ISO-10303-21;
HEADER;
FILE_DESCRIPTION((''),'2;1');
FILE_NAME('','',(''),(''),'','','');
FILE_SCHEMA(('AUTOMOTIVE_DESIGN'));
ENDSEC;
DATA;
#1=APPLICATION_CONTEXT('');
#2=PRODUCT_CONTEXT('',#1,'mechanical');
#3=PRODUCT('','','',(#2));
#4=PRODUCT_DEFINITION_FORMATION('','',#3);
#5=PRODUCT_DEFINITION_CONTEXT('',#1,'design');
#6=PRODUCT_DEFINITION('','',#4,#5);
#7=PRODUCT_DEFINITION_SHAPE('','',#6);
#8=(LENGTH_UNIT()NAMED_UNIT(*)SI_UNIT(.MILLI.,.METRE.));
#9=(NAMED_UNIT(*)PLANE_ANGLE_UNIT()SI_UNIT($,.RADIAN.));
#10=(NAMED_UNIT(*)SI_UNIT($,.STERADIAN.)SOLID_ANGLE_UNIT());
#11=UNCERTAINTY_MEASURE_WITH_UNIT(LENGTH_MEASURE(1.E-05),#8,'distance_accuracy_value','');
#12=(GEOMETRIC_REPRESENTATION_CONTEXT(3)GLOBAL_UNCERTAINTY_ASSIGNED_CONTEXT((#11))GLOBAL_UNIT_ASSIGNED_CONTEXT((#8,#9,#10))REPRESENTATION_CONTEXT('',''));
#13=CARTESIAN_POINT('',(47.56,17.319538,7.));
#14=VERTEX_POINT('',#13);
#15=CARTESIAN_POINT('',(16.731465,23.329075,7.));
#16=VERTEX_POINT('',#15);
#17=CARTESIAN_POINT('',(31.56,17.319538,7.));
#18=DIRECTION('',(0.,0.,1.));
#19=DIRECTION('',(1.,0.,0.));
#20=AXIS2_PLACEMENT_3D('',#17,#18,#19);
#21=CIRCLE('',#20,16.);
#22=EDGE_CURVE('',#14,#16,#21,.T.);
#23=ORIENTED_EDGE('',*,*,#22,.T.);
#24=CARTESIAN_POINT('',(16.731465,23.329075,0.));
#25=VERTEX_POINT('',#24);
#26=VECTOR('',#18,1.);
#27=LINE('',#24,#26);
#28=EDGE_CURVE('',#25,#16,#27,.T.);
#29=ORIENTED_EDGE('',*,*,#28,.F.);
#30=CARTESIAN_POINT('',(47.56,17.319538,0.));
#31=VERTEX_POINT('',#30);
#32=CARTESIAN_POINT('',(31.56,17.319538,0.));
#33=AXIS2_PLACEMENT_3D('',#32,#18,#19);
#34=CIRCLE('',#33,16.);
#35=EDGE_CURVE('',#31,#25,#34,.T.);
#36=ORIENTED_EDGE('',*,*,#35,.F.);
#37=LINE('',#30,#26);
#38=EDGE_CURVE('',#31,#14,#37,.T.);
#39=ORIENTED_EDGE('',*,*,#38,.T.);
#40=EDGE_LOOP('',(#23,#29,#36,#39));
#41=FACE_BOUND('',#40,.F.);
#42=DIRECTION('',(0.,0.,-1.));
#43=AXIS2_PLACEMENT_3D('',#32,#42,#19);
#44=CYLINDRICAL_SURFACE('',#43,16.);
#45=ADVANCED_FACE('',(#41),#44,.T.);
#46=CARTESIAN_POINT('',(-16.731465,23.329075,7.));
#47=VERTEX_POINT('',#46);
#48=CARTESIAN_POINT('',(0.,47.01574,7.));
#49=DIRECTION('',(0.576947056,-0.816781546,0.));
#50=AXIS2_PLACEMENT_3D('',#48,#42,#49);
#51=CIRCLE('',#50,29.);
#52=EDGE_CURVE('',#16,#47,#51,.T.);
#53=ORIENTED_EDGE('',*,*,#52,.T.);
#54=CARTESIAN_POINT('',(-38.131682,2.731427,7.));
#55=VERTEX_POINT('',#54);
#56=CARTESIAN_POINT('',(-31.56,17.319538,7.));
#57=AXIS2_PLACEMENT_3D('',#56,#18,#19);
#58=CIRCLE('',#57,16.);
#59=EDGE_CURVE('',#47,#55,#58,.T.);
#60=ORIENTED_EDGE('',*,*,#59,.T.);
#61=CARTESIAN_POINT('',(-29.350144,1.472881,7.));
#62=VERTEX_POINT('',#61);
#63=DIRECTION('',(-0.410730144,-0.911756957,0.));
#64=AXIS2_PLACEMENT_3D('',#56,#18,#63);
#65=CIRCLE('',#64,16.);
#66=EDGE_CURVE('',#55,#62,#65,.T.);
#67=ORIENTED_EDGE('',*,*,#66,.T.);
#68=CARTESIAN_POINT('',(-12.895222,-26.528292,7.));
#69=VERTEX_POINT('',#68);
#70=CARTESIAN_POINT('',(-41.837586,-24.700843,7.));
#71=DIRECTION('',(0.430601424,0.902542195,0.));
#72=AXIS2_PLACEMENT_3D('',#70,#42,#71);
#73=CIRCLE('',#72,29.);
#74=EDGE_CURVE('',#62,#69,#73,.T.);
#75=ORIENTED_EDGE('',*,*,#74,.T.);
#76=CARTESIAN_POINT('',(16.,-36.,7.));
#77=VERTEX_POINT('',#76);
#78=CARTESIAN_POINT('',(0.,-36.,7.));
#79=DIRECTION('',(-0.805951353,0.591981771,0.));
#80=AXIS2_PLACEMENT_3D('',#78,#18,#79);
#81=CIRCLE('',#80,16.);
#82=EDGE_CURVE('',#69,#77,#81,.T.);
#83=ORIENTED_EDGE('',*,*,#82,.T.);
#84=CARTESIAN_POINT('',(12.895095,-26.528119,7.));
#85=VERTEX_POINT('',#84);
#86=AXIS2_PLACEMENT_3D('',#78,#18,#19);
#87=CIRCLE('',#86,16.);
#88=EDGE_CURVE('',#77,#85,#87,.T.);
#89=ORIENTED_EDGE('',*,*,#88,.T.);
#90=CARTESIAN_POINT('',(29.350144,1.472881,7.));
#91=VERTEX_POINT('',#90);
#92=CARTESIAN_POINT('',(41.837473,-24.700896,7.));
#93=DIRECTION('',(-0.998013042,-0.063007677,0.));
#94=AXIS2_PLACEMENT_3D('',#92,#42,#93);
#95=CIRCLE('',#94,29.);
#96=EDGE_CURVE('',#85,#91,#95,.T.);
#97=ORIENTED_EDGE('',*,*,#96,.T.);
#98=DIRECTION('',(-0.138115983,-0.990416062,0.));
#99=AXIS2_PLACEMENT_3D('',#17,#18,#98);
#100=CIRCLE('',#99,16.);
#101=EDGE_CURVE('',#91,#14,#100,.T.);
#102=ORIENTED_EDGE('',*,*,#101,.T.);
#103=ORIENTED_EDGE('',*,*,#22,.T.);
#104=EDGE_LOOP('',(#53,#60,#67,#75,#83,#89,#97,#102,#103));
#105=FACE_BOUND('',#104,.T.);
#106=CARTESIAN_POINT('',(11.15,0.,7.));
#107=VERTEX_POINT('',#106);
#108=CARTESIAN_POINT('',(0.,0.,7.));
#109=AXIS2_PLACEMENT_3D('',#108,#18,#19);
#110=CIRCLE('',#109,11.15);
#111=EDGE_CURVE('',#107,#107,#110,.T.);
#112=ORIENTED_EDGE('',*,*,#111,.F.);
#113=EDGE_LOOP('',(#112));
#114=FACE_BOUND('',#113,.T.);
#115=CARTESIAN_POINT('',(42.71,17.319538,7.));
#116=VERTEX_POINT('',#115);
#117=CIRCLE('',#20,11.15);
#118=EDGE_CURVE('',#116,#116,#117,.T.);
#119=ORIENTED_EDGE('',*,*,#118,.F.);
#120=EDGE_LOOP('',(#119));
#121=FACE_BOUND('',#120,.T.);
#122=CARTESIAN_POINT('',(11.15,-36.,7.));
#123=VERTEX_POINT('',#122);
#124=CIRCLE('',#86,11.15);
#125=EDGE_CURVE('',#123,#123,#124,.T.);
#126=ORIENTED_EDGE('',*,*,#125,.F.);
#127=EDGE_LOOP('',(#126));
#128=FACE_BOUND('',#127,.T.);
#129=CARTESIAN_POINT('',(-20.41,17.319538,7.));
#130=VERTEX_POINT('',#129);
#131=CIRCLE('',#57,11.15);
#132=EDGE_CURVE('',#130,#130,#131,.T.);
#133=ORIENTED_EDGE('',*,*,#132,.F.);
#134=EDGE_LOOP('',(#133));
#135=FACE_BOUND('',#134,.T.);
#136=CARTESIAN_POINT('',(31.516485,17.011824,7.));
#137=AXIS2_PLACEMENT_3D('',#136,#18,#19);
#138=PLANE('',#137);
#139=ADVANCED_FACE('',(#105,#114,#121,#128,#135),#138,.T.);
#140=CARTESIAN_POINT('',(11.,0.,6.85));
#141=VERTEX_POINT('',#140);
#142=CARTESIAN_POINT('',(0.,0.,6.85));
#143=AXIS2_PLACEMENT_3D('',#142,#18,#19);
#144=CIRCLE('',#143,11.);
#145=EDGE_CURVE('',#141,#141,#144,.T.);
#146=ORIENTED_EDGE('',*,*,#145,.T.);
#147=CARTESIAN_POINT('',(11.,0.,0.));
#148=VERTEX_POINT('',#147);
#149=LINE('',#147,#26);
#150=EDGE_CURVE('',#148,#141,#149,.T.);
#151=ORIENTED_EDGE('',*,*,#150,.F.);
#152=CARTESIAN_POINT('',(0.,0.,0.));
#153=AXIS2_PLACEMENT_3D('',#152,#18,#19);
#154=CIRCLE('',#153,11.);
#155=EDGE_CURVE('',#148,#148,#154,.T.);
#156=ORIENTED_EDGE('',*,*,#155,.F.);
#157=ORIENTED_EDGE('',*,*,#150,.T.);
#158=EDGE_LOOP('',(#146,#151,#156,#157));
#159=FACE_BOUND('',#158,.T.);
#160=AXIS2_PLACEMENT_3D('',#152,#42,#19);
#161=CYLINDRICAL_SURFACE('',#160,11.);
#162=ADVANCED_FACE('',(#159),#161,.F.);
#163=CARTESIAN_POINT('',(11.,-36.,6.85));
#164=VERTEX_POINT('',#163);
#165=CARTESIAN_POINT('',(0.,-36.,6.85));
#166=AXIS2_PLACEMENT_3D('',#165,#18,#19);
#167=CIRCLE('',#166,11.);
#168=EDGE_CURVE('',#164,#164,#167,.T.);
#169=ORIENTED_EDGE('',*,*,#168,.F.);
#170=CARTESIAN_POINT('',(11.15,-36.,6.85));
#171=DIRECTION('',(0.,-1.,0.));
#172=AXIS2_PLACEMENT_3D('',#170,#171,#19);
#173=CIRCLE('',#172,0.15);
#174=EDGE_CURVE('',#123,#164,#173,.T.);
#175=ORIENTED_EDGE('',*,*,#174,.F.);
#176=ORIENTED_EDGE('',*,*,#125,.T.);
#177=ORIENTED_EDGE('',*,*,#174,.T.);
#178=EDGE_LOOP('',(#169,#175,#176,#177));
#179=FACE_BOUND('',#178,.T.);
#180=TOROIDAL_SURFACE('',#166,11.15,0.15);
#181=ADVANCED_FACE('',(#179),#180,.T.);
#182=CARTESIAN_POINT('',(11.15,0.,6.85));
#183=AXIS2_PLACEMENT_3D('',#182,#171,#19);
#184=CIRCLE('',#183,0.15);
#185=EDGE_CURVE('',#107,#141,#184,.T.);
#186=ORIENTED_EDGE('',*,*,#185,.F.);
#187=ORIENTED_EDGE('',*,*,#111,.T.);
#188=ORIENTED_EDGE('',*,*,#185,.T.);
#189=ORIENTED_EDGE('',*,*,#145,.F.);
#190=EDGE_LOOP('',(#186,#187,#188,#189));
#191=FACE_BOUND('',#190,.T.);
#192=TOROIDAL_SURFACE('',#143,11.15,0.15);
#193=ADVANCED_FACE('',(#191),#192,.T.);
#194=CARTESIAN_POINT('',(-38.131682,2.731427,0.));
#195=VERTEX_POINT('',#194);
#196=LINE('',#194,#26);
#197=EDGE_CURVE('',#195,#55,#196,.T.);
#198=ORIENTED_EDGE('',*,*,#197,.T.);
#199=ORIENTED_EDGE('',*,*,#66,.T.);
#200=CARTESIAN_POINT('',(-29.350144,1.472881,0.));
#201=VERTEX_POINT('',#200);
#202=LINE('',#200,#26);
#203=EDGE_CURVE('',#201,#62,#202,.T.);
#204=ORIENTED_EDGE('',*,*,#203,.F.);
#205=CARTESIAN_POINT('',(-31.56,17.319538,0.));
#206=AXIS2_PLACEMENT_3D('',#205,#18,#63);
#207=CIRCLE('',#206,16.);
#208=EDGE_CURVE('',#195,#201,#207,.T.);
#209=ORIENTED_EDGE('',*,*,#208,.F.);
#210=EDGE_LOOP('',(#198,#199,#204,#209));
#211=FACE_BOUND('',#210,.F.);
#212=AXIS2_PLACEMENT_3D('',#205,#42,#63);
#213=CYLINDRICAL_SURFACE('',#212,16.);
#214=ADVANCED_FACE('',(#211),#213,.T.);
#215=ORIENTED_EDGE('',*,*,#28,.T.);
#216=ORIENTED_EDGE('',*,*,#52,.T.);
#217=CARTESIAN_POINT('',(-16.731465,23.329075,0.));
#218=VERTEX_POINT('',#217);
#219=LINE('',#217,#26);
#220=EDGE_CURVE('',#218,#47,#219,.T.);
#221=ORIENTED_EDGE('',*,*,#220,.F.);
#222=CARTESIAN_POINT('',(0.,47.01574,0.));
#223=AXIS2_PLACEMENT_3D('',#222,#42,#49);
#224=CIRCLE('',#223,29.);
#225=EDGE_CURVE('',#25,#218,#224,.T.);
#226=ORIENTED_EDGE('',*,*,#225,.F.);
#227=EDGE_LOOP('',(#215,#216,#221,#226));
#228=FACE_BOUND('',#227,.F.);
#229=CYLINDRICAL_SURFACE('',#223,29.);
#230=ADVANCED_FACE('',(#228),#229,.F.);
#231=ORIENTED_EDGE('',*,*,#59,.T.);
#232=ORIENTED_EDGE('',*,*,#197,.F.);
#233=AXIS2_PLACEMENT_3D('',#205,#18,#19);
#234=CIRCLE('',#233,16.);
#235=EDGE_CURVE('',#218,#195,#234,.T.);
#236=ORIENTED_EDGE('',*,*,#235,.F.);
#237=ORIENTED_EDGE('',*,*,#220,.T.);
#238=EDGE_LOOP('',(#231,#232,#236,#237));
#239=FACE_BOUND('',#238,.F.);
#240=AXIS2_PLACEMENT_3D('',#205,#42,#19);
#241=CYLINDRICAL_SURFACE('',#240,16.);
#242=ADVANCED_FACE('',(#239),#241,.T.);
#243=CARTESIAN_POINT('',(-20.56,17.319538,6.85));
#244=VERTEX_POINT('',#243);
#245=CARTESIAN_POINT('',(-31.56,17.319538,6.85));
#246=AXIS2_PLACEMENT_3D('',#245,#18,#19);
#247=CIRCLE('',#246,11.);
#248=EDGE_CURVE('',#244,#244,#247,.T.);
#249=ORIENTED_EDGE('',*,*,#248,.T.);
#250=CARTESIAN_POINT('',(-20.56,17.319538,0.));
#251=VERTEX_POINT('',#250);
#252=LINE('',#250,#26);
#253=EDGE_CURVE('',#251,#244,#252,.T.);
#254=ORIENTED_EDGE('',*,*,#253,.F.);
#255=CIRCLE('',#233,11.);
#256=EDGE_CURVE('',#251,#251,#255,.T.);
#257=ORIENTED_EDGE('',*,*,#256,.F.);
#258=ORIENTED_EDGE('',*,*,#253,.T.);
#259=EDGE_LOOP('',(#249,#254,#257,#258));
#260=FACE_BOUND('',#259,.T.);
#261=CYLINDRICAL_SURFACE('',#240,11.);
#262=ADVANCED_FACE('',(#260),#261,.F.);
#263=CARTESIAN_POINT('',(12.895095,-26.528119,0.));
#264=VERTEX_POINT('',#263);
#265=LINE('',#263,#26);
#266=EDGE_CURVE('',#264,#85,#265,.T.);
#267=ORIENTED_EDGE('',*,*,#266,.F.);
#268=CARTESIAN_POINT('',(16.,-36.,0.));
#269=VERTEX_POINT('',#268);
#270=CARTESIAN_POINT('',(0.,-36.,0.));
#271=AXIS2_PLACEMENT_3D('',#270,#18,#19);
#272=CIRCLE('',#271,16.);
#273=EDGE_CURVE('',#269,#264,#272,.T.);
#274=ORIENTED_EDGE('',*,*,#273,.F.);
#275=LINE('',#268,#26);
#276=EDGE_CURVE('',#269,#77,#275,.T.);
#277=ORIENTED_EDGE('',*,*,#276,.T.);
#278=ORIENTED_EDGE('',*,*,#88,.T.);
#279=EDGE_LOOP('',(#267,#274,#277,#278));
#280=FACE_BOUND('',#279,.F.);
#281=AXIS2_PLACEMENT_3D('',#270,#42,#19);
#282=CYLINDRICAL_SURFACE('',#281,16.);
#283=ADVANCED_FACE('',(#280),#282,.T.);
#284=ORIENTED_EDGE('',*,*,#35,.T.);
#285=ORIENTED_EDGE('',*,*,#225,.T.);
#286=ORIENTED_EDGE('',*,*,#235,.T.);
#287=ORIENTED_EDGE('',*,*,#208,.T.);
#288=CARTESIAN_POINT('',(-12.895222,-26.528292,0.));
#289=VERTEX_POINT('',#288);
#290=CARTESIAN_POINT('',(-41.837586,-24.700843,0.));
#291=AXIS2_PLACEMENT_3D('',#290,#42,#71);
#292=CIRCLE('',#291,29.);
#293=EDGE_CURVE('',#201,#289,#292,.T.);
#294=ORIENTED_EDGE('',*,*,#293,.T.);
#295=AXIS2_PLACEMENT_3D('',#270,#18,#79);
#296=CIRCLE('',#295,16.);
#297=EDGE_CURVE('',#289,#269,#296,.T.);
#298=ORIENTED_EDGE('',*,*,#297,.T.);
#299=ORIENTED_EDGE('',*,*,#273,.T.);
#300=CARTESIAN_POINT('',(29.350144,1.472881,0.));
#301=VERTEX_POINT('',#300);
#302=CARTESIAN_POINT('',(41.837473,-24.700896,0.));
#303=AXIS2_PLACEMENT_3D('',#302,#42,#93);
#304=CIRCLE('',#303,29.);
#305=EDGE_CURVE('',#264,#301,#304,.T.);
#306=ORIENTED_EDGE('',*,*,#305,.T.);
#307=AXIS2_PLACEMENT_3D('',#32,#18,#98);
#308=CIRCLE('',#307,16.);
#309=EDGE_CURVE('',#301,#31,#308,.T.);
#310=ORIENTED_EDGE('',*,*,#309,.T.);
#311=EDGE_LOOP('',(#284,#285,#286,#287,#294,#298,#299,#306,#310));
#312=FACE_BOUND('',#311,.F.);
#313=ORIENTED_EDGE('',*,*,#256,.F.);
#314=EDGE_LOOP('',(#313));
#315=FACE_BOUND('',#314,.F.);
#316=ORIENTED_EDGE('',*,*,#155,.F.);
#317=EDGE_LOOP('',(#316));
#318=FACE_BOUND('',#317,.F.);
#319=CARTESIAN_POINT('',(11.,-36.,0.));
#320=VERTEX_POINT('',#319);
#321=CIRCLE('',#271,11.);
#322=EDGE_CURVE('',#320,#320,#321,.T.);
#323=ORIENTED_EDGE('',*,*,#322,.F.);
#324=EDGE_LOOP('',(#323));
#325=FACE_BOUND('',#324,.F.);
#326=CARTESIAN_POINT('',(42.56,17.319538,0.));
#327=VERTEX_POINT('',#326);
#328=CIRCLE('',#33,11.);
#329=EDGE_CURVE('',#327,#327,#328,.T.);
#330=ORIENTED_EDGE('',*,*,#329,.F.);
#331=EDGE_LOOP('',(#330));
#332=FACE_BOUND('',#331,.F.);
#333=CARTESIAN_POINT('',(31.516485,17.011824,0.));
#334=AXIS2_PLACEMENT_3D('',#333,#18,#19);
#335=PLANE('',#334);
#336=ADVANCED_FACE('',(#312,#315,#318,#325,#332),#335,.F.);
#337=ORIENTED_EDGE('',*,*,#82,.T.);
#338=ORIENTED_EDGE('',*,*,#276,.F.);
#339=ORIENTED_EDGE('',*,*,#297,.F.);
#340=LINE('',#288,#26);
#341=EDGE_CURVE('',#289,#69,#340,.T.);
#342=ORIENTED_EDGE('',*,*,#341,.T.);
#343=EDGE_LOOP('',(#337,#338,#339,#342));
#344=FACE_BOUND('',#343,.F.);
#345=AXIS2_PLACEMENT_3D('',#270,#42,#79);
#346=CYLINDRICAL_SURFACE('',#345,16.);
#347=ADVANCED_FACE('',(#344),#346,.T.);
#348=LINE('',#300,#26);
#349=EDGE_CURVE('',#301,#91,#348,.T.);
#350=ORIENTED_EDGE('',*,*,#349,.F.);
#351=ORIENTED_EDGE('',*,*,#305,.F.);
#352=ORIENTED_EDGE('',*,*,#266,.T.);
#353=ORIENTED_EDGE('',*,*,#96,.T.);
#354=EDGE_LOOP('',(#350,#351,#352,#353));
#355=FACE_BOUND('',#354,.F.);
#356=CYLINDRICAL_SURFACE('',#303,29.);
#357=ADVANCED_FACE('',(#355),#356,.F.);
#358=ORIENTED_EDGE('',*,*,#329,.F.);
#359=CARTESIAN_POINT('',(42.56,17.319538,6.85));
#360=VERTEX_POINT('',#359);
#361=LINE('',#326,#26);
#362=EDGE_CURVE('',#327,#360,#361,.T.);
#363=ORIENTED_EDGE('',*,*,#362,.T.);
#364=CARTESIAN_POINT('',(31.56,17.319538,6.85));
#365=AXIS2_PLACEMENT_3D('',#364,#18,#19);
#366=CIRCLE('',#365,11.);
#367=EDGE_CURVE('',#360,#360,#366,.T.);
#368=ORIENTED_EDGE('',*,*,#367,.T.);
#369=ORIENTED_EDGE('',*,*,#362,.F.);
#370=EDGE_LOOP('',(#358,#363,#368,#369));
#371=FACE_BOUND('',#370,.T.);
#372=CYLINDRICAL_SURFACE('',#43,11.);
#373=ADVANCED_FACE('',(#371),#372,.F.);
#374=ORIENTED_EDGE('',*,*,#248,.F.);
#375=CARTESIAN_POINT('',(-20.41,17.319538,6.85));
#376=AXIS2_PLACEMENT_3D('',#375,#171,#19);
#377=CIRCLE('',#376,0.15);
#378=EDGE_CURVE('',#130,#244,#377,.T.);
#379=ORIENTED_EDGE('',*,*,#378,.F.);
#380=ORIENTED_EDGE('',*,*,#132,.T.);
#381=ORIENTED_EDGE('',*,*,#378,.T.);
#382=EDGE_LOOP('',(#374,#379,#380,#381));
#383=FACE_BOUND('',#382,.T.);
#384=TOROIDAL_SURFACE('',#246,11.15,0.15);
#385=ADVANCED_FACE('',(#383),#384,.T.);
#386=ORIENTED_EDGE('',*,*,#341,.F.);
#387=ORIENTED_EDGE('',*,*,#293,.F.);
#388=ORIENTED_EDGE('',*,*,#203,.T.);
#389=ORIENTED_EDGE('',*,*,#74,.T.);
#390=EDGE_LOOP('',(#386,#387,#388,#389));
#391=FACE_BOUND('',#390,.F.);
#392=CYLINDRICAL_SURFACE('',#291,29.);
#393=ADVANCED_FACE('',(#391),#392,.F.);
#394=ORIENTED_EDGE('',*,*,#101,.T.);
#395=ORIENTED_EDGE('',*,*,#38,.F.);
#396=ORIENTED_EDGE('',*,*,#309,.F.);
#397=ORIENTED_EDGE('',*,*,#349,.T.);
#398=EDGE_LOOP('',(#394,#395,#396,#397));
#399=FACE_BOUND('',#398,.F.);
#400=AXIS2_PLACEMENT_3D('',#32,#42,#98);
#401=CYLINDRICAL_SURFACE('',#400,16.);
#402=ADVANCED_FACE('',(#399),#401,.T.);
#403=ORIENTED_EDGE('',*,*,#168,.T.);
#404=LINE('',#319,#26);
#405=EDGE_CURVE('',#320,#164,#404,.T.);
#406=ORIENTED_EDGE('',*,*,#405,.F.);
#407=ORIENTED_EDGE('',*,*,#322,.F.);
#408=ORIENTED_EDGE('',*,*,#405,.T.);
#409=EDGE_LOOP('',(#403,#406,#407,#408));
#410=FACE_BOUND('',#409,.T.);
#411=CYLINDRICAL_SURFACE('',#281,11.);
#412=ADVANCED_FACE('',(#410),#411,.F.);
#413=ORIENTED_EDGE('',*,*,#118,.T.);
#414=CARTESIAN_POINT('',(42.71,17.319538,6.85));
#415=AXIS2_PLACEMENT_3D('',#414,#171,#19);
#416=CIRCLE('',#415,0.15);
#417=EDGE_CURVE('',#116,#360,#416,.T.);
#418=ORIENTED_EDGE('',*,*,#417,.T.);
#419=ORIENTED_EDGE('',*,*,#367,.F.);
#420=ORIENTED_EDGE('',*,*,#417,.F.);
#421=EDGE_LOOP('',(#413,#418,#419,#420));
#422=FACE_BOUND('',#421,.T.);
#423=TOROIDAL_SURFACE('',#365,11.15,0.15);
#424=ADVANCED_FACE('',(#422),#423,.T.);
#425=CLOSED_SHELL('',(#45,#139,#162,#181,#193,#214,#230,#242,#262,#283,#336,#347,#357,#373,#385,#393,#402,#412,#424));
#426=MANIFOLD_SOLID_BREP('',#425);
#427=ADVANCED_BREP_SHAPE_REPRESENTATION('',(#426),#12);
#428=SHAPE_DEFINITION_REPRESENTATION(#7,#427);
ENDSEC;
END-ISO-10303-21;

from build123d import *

# Parameters (mm, degrees)
F0_R     = 11
F1_DEPTH = 7
F2_DEPTH = 7
F3_R     = 0.15
F4_R     = 0.15
F5_R     = 0.15


# Not quite as in the source:
# - a feature names something its author has since deleted; it is built from what else it names


with BuildPart() as f1:
    # F0 (on Top) → F1 (new body)
    with BuildSketch(Plane.XY):
        with BuildLine():
            ThreePointArc((29.3501442774, 1.4728811124), (17.7035935394, 9.3195381001), (16.7314646223, 23.3290753994))
            ThreePointArc((16.7314646223, 23.3290753994), (0, 18.0157402468), (-16.7314646223, 23.3290753994))
            ThreePointArc((-16.7314646223, 23.3290753994), (-15.8555966996, 20.3808641164), (-15.56, 17.3195381001))
            ThreePointArc((-15.56, 17.3195381001), (-19.4902507988, 6.8161503505), (-29.3501442774, 1.4728811124))
            ThreePointArc((-29.3501442774, 1.4728811124), (-16.8351135056, -10.0081099666), (-12.8952216464, -26.5282916699))
            ThreePointArc((-12.8952216464, -26.5282916699), (-0.0001071921, -20.0000000004), (12.8950947338, -26.5281188876))
            ThreePointArc((12.8950947338, -26.5281188876), (16.8350899961, -10.0080120701), (29.3501442774, 1.4728811124))
        make_face()
        Circle(F0_R, mode=Mode.SUBTRACT)
    extrude(amount=F1_DEPTH)

    # F0 (on Top) → F2 (join)
    with BuildSketch(Plane.XY):
        with BuildLine():
            ThreePointArc((29.3501442774, 1.4728811124), (42.0633877496, 5.2497888988), (47.56, 17.3195381001))
            ThreePointArc((47.56, 17.3195381001), (34.6213260163, 33.0239414005), (16.7314646223, 23.3290753994))
            ThreePointArc((16.7314646223, 23.3290753994), (17.7035935394, 9.3195381001), (29.3501442774, 1.4728811124))
        make_face()
        with Locations((31.56, 17.3195381001)):
            Circle(F0_R, mode=Mode.SUBTRACT)
        with BuildLine():
            ThreePointArc((-15.56, 17.3195381001), (-15.8555966996, 20.3808641164), (-16.7314646223, 23.3290753994))
            ThreePointArc((-16.7314646223, 23.3290753994), (-42.6554805123, 28.8473441446), (-38.1316823001, 2.7314267848))
            ThreePointArc((-38.1316823001, 2.7314267848), (-33.8298826127, 1.4813679746), (-29.3501442774, 1.4728811124))
            ThreePointArc((-29.3501442774, 1.4728811124), (-19.4902507988, 6.8161503505), (-15.56, 17.3195381001))
        make_face()
        with Locations((-31.56, 17.3195381001)):
            Circle(F0_R, mode=Mode.SUBTRACT)
        with BuildLine():
            ThreePointArc((16, -36), (15.2039717794, -31.0161017135), (12.8950947338, -26.5281188876))
            ThreePointArc((12.8950947338, -26.5281188876), (-0.0001071921, -20.0000000004), (-12.8952216464, -26.5282916699))
            ThreePointArc((-12.8952216464, -26.5282916699), (-4.9837964273, -51.2040051687), (16, -36))
        make_face()
        with Locations((0, -36)):
            Circle(F0_R, mode=Mode.SUBTRACT)
    extrude(amount=F2_DEPTH)

    # F3
    f3_edges = [f1.edges().sort_by_distance(p)[0] for p in [
        (-11, 0, 7),
    ]]
    fillet(f3_edges, radius=F3_R)

    # F4
    f4_edges = [f1.edges().sort_by_distance(p)[0] for p in [
        (-42.56, 17.319538, 7),
        (-11, -36, 7),
    ]]
    fillet(f4_edges, radius=F4_R)

    # F5
    f5_edges = [f1.edges().sort_by_distance(p)[0] for p in [
        (20.56, 17.319538, 7),
    ]]
    fillet(f5_edges, radius=F5_R)


solid = f1.part
